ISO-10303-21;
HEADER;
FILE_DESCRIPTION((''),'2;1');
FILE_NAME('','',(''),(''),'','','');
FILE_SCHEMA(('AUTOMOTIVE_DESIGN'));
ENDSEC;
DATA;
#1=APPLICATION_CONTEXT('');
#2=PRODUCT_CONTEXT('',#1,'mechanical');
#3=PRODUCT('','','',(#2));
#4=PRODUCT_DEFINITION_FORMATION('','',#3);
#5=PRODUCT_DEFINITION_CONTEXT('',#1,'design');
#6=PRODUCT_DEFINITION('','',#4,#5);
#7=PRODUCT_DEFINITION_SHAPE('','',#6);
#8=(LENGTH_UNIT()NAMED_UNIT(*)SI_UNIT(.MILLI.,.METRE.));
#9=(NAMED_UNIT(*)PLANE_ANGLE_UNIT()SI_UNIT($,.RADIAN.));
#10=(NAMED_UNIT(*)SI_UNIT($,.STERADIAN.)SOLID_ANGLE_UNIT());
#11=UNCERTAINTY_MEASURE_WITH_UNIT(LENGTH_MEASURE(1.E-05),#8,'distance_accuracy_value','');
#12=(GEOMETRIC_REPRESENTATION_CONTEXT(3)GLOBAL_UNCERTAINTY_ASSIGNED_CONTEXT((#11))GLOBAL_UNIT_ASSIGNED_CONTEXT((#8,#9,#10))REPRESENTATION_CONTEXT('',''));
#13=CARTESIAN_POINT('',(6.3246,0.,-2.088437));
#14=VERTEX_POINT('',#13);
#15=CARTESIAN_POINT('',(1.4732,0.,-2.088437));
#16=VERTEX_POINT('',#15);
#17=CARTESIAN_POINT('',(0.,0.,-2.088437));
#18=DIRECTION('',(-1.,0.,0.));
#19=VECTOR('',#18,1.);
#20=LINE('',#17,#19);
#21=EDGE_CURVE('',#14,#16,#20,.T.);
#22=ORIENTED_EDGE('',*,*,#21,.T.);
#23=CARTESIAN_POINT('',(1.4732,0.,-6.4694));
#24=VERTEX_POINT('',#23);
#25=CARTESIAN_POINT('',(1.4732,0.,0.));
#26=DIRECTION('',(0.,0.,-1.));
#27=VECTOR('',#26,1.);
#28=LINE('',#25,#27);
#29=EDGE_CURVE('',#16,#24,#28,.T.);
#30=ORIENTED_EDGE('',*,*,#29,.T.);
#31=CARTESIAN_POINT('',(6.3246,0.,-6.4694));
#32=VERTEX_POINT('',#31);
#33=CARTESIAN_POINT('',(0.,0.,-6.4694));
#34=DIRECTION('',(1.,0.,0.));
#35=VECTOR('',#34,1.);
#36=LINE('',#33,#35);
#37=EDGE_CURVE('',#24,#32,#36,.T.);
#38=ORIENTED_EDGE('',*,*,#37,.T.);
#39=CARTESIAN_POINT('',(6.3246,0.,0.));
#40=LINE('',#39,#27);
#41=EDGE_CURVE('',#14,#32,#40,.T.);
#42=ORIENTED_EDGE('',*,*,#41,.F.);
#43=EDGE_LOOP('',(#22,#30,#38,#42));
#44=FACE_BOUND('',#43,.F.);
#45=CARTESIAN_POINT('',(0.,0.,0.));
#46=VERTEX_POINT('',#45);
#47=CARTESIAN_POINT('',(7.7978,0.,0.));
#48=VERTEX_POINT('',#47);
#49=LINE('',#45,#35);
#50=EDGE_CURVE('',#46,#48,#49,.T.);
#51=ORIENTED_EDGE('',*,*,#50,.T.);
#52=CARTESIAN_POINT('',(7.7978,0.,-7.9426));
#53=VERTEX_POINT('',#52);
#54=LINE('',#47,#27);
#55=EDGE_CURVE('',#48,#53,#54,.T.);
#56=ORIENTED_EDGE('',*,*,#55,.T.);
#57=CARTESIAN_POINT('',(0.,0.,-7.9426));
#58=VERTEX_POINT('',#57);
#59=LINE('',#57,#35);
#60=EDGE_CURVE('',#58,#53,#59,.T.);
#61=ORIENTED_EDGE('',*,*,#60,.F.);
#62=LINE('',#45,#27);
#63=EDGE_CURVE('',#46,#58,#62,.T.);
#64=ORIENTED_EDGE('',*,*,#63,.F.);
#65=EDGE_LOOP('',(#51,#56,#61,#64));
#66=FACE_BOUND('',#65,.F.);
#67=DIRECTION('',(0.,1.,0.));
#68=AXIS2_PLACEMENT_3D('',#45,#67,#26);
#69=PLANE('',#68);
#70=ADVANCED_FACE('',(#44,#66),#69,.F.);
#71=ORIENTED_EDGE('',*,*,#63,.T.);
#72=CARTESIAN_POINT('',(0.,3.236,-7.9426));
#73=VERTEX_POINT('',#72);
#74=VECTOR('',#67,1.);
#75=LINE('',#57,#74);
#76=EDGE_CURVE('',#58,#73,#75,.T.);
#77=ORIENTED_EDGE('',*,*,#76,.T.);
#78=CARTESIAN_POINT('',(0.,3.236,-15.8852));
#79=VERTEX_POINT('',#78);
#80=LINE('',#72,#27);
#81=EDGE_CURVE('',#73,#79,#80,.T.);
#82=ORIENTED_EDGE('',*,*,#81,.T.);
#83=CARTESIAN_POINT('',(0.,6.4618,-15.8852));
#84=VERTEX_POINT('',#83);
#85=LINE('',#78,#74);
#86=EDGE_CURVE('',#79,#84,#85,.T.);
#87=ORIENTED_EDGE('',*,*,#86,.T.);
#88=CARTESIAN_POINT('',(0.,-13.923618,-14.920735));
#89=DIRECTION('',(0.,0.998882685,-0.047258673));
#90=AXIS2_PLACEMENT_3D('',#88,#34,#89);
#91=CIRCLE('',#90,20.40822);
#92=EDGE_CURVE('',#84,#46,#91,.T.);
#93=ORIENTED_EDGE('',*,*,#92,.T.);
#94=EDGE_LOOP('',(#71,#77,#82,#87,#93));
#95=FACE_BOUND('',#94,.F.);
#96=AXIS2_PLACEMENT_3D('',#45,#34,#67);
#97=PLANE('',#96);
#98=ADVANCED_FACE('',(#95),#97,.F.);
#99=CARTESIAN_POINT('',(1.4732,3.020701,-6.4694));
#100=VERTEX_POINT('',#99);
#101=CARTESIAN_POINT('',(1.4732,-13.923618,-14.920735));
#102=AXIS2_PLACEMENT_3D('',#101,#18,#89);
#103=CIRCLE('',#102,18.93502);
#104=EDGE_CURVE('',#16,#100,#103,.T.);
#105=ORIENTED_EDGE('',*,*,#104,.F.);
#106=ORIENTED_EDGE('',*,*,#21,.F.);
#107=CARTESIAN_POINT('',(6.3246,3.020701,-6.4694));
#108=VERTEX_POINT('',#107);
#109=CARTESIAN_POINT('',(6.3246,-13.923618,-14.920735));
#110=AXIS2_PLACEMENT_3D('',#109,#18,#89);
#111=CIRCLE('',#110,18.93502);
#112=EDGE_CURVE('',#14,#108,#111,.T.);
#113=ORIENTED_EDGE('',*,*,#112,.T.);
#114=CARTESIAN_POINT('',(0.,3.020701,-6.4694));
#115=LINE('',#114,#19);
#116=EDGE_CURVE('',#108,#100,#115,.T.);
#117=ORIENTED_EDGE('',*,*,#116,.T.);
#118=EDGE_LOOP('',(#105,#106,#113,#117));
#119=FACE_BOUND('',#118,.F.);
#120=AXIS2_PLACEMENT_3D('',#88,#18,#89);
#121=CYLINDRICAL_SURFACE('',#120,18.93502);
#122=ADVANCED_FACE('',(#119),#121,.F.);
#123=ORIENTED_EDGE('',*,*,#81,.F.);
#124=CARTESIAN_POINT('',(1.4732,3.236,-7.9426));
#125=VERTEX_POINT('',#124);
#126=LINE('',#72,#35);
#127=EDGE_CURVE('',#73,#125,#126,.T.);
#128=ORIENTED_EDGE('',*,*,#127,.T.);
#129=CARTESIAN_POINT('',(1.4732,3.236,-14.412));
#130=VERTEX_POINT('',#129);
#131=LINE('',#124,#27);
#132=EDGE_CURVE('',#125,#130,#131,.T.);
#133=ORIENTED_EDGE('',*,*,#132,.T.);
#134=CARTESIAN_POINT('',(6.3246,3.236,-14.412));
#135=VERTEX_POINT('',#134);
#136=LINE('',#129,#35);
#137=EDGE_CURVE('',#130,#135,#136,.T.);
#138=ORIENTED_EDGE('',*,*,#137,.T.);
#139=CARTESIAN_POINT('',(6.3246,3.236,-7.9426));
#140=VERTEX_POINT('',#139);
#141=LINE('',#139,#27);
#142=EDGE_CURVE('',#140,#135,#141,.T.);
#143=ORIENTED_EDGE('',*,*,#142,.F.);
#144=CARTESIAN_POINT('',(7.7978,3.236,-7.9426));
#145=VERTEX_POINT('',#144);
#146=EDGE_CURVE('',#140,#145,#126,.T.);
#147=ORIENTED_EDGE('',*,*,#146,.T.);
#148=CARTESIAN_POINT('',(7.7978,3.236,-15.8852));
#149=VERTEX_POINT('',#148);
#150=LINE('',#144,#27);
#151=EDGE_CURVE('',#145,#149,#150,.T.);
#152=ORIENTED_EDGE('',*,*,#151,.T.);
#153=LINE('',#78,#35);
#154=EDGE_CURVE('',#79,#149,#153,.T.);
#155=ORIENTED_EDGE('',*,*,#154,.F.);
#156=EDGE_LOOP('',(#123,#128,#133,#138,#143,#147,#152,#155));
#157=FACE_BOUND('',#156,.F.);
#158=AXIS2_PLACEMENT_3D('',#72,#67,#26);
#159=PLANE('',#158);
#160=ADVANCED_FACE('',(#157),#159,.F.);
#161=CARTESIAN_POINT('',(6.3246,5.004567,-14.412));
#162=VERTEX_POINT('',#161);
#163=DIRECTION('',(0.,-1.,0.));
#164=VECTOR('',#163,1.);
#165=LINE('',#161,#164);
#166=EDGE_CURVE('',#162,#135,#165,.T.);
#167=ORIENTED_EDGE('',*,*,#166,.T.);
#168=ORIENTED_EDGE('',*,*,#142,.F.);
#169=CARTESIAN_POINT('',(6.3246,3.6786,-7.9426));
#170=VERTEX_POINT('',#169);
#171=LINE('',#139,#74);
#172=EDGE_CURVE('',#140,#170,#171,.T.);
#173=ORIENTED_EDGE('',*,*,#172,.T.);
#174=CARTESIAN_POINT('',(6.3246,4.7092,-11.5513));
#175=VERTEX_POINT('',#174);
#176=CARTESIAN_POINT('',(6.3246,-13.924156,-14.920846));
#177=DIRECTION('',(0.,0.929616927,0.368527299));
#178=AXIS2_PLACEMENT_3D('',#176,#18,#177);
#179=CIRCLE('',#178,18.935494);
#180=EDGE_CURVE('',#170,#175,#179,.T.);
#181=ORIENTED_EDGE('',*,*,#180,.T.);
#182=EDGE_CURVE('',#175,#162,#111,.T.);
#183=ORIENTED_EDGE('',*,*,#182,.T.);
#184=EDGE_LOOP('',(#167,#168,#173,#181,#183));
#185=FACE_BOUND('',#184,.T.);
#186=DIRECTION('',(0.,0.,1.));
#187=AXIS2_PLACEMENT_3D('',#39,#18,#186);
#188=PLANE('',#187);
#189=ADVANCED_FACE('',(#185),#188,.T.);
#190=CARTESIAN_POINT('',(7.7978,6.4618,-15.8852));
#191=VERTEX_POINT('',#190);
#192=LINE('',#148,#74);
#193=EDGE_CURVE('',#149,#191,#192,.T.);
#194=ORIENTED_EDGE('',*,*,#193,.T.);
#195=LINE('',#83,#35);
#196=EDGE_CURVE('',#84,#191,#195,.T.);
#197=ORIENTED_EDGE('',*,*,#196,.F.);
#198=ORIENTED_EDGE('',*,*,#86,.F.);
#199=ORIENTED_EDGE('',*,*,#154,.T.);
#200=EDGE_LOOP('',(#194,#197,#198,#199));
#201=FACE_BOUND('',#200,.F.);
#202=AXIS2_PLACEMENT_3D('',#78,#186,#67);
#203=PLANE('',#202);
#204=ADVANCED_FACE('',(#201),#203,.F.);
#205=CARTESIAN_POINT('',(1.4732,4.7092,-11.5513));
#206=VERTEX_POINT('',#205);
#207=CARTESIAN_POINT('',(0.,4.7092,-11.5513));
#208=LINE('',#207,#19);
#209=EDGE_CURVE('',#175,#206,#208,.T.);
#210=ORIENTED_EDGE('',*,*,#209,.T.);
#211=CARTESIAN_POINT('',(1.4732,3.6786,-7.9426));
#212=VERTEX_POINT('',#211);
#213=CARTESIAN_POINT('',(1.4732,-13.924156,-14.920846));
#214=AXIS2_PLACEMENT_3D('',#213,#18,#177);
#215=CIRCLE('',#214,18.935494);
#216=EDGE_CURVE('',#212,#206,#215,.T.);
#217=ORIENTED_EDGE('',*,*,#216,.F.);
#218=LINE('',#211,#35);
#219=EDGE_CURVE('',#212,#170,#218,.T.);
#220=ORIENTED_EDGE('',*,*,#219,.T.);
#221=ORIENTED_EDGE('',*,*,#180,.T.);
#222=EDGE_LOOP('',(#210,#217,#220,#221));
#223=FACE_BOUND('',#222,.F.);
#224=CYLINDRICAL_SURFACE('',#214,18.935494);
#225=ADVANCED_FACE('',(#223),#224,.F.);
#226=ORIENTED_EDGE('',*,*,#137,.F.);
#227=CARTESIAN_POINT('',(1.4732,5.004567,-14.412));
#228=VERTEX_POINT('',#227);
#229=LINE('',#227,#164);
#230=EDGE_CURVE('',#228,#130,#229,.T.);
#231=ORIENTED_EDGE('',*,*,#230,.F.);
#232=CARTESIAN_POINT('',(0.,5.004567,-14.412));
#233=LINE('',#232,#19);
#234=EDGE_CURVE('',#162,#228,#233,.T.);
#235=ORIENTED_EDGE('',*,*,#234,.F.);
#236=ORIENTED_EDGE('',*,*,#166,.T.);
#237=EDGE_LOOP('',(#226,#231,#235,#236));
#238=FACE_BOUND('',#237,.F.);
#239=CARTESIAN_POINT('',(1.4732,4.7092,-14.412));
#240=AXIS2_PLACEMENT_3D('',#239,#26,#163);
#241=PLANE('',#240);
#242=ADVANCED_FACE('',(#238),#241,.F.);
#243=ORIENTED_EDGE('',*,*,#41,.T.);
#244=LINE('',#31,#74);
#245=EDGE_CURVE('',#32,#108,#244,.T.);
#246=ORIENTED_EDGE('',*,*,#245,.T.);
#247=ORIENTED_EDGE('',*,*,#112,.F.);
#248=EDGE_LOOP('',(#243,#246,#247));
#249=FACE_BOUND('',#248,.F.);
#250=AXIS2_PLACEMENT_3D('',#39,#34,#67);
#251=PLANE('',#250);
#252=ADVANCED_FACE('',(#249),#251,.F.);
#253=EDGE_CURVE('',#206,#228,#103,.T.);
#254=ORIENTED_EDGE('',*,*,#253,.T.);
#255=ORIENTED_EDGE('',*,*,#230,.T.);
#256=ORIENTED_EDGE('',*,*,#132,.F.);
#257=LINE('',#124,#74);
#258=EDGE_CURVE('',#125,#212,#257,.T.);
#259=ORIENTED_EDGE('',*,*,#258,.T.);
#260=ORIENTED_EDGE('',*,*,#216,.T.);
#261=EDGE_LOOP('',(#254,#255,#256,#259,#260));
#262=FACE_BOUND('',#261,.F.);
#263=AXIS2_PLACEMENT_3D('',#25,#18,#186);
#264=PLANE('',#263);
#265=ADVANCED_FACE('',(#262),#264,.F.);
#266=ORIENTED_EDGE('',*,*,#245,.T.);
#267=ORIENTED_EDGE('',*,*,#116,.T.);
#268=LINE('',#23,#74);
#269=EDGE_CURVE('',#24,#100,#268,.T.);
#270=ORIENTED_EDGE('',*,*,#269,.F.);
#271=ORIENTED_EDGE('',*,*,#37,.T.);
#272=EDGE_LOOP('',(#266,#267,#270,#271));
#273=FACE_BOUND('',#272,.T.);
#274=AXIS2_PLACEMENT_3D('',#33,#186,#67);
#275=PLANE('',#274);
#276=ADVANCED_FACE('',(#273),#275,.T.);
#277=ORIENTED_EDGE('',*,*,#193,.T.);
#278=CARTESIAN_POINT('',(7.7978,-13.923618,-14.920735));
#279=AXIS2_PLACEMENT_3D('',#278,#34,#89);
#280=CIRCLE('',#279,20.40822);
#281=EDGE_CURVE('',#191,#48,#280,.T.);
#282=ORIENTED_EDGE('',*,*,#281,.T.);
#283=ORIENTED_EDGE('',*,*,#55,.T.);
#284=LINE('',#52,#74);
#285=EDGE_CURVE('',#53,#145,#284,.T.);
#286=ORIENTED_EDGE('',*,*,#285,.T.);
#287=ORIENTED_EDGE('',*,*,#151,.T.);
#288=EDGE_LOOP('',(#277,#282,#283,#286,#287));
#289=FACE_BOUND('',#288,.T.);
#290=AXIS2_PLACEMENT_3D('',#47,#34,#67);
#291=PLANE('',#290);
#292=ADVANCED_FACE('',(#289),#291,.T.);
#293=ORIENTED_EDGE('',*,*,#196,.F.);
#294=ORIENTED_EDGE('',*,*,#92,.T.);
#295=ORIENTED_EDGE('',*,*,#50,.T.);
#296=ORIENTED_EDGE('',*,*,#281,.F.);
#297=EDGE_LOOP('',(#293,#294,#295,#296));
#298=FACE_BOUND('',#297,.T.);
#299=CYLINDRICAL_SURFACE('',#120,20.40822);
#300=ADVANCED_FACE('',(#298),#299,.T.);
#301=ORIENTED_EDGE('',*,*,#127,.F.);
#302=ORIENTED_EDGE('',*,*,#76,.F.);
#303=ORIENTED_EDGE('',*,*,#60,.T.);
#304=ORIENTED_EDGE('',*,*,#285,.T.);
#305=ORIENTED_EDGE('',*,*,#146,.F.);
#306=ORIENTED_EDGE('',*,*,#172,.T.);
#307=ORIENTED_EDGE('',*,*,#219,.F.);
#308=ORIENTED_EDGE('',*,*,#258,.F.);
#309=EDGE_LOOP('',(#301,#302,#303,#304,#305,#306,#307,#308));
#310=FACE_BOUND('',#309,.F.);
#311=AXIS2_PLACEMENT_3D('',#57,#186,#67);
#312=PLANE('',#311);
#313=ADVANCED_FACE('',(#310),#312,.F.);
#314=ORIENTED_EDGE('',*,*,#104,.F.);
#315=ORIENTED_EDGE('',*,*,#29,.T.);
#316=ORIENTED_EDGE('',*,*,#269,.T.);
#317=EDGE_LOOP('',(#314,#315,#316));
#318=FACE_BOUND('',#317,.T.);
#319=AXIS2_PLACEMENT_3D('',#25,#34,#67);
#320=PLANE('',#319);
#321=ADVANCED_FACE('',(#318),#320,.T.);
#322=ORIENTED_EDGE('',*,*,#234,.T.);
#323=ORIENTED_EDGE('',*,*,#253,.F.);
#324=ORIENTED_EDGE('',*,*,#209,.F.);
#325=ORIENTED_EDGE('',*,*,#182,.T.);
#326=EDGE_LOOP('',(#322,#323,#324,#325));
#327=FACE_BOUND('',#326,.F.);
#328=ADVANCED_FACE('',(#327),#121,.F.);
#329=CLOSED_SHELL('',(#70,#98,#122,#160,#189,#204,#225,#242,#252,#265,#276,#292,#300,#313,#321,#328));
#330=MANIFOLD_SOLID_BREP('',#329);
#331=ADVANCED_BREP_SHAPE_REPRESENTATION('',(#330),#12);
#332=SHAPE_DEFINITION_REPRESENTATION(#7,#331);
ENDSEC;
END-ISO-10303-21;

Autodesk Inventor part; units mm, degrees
ref_plane "YZ Plane" through (0, 0, 0) normal (1, 0, 0) x (0, 1, 0)
ref_plane "XZ Plane" through (0, 0, 0) normal (0, 1, 0) x (-1, 0, 0)
sketch "Sketch1" plane through (0, 0, 0) normal (1, 0, 0) x (0, 1, 0)
  line L0 (0, 0) -> (0, -7.9426)
  line L1 (0, -7.9426) -> (3.236, -7.9426)
  line L2 (3.236, -7.9426) -> (3.236, -15.8852)
  line L3 (3.236, -15.8852) -> (6.4618, -15.8852)
  arc A0 (6.4618, -15.8852) -> (0, 0) centre (-13.924, -14.9208) ccw
  dimension "d0" = 7.9426
  dimension "d1" = 3.236
  dimension "d2" = 7.9426
  dimension "d3" = 3.2258
extrude "Extrusion1" add sketch "Sketch1" along normal blind 7.7978
shell "Shell1" thickness 1.4732 removed faces 1 at (2.5993, 0, -2.6475)
ref_plane "Work Plane1" through (1.4732, 0, 0) normal (-1, 0, 0) x (0, 0, 1)
sketch "Sketch4" plane through (1.4732, 0, 0) normal (-1, 0, 0) x (0, 0, 1)
  line L0 (-7.9426, 3.236) -> (-15.8852, 3.236) projected
  line L1 (-15.8852, 3.236) -> (-15.8852, 6.4618) projected
  arc A0 (0, 0) -> (-15.8852, 6.4618) centre (-14.9208, -13.924) ccw projected
  line L2 (-14.412, 4.7092) -> (-14.412, 5.0045)
  arc A1 (-7.9426, 3.6786) -> (-14.412, 5.0045) centre (-14.9208, -13.924) ccw
  line L3 (-14.412, 5.0045) -> (-14.412, 3.236)
  line L4 (-7.9426, 3.236) -> (-15.8852, 3.236) projected
  line L5 (-7.9426, 3.236) -> (-7.9426, 3.6786)
extrude "Extrusion2" cut sketch "Sketch4" against normal blind 4.8514
properties part number "2x1 curve" material "ABS Plastic"
